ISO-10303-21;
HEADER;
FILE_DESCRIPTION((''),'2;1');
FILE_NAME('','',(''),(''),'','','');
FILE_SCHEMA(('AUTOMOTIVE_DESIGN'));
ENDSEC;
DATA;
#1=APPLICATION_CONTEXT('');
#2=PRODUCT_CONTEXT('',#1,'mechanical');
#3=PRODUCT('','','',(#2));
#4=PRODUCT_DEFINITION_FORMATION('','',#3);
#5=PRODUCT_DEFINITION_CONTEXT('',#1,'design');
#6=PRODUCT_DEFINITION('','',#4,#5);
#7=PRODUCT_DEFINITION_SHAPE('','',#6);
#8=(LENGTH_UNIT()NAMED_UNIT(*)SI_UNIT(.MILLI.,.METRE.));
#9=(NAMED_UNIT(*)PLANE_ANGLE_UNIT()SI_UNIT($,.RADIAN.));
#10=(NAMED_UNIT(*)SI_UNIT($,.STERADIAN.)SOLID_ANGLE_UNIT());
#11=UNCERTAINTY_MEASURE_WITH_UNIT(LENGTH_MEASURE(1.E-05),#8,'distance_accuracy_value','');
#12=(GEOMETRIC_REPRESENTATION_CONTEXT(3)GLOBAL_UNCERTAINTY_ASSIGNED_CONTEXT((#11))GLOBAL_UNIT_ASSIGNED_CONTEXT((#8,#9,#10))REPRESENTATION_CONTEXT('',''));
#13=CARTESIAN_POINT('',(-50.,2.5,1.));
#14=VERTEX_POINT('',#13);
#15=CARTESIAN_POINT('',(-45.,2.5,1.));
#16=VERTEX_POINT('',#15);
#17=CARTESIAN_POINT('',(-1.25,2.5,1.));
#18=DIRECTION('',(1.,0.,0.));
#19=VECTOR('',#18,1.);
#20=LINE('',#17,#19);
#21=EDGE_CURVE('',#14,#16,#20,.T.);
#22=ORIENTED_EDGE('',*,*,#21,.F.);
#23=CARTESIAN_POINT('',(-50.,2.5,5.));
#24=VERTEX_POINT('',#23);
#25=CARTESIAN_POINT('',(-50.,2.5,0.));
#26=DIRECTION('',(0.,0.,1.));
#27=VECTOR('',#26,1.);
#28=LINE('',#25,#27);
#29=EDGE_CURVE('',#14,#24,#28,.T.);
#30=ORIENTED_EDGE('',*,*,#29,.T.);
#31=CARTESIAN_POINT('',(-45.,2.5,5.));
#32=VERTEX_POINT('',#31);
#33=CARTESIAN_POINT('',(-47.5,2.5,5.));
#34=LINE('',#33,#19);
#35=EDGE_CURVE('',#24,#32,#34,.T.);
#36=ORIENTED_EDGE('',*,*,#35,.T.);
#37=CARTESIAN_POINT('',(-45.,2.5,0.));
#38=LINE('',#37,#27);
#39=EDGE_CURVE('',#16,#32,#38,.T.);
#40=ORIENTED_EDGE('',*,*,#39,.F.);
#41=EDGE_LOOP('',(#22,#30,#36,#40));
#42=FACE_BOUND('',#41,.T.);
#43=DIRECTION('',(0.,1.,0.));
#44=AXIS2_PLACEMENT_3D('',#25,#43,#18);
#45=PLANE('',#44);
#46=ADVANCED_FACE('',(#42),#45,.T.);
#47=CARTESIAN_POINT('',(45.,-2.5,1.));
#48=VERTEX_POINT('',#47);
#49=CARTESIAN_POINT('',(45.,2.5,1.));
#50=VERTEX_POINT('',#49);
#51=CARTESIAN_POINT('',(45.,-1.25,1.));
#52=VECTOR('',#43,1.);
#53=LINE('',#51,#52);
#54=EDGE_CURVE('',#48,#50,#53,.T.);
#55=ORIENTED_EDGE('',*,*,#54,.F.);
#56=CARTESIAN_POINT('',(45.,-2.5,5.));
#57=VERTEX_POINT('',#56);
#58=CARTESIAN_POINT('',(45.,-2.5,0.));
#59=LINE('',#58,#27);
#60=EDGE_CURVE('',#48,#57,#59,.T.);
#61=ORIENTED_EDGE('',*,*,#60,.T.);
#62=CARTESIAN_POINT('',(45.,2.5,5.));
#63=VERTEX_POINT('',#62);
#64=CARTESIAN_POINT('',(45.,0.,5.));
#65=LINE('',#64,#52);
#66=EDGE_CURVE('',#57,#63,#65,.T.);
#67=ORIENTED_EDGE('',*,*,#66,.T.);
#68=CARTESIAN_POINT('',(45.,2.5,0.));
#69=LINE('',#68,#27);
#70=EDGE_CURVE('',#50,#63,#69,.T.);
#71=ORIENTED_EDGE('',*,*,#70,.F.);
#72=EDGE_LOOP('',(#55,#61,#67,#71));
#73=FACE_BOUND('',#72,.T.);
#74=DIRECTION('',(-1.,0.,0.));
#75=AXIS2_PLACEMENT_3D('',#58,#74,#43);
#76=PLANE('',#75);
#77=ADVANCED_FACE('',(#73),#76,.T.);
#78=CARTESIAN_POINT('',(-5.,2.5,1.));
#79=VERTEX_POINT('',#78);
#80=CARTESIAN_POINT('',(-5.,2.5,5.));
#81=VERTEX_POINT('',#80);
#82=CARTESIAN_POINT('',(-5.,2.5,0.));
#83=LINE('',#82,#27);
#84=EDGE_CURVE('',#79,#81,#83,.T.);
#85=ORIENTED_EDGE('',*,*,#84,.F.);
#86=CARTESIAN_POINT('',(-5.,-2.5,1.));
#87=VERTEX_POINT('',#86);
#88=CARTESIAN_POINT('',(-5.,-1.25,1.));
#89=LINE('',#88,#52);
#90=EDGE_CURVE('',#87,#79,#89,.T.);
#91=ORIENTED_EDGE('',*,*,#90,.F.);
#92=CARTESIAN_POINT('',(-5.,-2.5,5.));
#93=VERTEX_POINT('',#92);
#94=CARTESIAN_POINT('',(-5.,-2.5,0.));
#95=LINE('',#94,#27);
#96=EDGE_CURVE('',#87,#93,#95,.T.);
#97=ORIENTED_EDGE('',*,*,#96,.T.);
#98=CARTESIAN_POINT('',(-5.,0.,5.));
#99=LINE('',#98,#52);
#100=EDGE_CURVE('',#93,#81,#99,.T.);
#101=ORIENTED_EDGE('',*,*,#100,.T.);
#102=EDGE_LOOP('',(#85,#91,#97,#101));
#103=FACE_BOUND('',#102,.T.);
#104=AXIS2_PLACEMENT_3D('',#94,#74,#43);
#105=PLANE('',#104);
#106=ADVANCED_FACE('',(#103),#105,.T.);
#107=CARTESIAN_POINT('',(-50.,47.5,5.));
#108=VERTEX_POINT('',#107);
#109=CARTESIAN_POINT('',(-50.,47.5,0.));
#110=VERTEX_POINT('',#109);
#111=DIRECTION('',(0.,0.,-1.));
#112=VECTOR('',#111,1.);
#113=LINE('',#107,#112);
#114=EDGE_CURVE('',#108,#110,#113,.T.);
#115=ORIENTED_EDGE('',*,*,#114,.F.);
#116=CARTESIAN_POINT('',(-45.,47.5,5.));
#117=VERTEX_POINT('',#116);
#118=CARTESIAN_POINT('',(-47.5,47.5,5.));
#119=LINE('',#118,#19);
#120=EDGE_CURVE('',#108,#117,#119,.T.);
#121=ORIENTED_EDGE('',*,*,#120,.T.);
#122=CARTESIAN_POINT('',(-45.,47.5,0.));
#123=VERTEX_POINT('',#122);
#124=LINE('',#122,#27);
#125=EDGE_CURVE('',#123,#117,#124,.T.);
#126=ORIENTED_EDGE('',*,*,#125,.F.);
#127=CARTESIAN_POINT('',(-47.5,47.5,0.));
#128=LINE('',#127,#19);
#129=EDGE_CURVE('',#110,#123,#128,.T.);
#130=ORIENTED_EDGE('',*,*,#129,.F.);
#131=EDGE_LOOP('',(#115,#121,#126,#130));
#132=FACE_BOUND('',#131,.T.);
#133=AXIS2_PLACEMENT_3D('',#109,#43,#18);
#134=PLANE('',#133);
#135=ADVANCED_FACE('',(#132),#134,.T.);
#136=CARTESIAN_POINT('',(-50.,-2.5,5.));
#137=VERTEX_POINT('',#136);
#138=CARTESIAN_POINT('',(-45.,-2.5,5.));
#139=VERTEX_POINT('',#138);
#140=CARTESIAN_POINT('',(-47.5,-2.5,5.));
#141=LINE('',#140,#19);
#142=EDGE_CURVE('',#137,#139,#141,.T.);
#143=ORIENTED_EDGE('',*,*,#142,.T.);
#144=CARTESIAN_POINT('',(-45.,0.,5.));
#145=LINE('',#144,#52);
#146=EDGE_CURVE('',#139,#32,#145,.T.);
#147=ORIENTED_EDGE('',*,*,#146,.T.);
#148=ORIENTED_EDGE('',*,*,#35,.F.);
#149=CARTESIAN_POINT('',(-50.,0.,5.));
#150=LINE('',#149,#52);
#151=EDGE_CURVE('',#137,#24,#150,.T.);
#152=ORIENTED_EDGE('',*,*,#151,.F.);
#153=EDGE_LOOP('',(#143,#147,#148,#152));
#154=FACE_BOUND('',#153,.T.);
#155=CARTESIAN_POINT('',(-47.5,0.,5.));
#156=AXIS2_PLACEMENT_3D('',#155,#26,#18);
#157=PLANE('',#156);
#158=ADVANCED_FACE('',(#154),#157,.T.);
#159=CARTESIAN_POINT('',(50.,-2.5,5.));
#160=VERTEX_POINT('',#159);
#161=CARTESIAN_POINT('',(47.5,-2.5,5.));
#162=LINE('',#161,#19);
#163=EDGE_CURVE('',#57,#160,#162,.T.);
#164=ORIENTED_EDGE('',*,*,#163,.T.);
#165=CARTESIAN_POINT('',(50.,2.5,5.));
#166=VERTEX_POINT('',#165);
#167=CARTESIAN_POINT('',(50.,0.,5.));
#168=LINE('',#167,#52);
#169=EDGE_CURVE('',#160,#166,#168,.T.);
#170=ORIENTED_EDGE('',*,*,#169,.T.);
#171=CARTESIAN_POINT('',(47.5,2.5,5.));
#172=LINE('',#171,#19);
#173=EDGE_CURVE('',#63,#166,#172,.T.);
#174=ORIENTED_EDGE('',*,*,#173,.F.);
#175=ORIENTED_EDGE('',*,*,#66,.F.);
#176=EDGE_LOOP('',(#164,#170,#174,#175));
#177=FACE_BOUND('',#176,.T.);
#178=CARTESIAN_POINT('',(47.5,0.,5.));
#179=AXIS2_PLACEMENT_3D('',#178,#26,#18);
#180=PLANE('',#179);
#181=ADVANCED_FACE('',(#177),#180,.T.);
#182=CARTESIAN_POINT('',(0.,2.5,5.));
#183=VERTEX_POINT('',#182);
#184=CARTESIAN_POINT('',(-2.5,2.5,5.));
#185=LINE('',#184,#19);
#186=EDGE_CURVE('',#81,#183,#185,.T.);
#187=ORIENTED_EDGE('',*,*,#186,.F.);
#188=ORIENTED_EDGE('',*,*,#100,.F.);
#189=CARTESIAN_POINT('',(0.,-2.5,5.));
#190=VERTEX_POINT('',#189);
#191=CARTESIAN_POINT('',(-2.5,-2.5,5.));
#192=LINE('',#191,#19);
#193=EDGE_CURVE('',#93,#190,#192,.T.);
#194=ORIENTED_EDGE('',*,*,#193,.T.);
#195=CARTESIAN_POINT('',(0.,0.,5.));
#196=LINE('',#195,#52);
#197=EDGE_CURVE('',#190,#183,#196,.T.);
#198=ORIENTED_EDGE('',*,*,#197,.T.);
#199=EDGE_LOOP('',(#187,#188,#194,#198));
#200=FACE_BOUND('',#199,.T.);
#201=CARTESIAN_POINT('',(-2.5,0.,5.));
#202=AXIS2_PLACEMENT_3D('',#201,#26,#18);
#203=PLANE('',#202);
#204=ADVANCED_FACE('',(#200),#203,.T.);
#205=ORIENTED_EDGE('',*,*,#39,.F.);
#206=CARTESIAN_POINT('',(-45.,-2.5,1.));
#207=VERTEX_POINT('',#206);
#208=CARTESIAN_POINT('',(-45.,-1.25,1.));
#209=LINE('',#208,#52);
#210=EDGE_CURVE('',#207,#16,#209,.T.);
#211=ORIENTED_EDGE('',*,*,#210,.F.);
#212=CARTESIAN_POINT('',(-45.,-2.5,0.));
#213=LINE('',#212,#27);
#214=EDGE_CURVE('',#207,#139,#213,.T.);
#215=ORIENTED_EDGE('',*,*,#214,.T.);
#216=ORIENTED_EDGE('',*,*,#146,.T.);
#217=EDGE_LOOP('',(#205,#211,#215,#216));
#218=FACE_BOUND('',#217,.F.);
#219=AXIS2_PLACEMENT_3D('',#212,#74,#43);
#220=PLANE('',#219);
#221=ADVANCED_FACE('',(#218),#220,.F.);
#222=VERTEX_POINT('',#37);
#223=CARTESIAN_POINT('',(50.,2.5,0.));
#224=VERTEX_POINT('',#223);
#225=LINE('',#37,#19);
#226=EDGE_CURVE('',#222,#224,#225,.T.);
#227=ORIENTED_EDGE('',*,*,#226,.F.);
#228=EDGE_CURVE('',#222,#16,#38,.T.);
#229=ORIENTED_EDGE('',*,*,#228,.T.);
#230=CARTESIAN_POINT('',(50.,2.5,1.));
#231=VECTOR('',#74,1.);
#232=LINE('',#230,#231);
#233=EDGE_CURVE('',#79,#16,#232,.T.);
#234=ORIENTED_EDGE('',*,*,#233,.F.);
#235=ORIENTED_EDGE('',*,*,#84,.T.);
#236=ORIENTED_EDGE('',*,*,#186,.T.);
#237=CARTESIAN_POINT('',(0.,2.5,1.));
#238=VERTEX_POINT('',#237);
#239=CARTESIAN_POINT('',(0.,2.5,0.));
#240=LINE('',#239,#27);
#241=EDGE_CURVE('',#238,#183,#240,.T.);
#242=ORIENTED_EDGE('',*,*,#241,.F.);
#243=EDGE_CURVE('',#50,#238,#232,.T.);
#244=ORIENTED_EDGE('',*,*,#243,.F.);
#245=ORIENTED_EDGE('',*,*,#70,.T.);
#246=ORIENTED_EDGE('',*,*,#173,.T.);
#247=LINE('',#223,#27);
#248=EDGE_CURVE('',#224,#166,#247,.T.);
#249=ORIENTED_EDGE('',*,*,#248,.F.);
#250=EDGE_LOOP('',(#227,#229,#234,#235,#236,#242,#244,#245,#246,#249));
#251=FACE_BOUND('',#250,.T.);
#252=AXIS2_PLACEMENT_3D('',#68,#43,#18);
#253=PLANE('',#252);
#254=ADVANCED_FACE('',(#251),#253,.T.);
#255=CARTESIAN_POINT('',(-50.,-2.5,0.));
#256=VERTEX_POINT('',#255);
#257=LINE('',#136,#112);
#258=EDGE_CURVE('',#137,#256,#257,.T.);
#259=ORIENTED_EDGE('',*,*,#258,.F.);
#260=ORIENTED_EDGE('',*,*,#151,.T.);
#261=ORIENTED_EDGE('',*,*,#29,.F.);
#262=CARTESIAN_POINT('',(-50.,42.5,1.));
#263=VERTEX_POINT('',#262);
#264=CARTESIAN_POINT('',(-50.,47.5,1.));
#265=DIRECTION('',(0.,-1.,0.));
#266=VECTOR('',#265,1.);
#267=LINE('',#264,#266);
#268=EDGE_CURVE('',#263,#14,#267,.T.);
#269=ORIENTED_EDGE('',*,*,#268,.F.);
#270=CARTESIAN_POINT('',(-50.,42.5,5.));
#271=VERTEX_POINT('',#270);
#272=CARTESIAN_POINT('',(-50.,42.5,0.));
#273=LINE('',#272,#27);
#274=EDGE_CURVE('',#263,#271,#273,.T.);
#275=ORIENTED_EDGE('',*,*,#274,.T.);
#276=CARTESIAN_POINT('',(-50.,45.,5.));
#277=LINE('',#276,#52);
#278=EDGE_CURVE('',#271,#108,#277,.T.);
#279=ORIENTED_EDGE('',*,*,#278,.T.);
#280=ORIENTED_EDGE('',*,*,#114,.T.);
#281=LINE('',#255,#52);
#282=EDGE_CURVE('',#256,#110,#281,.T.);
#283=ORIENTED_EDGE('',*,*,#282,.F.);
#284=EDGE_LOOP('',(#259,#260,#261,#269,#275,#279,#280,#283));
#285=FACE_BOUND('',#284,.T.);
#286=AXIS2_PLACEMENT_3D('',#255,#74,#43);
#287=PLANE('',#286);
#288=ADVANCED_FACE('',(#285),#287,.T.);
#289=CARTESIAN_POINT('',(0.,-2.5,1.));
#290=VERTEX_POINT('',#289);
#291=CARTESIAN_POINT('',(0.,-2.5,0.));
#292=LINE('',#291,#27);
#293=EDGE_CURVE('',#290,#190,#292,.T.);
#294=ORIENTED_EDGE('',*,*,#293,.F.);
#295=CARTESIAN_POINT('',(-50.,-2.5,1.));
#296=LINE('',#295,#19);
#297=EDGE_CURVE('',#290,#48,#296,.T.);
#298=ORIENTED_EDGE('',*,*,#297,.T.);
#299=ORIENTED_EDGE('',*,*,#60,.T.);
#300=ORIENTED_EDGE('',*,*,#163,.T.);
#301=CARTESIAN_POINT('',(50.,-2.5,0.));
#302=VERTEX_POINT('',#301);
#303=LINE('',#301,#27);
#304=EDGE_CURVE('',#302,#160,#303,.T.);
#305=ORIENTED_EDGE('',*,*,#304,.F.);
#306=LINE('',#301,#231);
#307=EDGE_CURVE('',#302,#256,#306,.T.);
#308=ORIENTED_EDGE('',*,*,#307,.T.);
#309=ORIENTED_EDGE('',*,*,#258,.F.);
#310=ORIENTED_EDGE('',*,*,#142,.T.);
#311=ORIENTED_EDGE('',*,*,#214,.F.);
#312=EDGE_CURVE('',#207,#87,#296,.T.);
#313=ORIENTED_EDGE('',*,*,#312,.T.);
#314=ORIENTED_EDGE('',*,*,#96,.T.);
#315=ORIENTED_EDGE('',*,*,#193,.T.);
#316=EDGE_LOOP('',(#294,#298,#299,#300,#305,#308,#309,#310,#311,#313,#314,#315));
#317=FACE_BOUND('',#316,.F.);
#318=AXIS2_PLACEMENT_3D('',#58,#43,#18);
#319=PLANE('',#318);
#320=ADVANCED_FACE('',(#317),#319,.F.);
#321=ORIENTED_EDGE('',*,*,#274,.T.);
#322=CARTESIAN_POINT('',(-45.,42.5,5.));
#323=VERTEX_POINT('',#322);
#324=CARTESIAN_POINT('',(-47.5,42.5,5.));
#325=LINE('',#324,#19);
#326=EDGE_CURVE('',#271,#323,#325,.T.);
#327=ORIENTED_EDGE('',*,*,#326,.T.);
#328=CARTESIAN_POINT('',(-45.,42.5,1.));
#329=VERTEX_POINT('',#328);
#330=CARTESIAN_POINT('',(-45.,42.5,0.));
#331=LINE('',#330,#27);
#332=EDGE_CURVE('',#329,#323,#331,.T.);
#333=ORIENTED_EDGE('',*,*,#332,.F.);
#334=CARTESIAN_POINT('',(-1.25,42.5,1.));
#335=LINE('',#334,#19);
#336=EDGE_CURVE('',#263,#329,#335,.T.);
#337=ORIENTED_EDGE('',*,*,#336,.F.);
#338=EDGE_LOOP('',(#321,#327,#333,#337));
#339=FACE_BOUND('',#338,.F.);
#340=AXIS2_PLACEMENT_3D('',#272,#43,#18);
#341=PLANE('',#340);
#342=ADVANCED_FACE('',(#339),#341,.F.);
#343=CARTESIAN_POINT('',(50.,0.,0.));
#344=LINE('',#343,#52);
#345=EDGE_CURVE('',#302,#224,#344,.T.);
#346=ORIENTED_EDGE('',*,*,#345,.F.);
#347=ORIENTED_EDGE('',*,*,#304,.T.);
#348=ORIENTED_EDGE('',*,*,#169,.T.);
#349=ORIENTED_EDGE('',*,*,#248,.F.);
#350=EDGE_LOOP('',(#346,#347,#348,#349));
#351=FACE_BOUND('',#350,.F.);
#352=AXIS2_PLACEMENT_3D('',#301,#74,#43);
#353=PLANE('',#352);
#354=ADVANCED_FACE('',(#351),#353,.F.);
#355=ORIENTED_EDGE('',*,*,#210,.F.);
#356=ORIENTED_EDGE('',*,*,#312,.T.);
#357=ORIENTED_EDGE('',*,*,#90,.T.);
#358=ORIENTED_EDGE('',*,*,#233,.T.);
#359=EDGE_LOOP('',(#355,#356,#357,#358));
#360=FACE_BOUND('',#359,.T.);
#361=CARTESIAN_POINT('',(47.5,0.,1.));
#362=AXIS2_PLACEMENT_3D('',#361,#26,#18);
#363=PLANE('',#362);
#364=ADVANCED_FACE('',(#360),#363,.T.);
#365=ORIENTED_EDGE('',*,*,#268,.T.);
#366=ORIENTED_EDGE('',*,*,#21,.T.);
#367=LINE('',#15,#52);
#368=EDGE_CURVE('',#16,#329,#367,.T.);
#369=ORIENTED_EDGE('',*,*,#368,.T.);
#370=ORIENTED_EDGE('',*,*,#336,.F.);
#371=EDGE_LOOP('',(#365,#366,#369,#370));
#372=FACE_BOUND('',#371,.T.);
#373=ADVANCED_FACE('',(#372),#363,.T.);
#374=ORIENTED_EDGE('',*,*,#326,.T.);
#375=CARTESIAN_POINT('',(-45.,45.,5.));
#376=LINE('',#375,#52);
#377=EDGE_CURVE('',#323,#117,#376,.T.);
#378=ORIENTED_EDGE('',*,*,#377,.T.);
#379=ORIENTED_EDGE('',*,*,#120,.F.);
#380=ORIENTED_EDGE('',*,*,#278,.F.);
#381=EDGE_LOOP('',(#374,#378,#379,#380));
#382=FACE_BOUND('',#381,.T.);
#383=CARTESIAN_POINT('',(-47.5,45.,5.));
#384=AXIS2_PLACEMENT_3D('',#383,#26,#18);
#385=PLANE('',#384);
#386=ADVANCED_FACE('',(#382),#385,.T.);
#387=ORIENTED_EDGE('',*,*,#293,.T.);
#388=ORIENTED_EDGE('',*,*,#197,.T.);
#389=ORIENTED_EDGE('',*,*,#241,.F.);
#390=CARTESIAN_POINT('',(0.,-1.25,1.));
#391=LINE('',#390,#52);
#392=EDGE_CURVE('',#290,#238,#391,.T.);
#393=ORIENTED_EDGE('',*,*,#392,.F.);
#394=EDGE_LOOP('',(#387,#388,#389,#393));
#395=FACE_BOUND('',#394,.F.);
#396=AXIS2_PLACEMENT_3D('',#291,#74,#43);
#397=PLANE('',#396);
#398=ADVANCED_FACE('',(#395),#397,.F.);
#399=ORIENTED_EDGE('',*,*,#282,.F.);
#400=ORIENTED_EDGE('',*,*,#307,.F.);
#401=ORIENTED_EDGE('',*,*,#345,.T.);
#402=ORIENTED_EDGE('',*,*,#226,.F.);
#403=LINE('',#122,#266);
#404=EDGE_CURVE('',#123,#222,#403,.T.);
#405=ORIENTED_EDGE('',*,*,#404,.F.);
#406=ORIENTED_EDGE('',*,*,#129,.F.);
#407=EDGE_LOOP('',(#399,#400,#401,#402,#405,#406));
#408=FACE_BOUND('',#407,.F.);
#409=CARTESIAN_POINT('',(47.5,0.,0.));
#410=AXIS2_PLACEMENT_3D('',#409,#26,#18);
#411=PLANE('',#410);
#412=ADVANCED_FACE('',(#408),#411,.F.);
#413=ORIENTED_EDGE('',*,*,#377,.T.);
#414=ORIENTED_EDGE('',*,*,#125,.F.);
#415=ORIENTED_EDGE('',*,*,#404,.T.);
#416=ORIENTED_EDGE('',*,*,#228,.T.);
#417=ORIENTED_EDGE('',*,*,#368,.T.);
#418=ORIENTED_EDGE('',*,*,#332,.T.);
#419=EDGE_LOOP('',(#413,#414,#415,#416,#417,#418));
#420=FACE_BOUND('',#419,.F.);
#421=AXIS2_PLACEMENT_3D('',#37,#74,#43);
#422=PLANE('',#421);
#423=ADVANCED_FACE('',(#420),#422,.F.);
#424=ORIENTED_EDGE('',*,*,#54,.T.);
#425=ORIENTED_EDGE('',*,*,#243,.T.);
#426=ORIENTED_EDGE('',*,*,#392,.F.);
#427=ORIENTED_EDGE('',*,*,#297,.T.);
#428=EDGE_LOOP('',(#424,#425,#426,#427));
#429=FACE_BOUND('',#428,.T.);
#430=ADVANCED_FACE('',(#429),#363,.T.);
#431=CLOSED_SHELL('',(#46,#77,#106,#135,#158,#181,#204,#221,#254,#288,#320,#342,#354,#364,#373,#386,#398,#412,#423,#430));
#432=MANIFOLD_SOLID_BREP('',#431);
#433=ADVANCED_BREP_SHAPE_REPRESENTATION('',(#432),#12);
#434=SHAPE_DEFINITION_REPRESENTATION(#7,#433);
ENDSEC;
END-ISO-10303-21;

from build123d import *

# Parameters (mm, degrees)
F0_W     = 5
F0_H     = 5
F1_DEPTH = 5
F0_W_2   = 45
F0_W_3   = 40
F0_H_2   = 40
F2_DEPTH = 1


# Not quite as in the source:
# - a feature of the source that left no trace in its solid (it failed there, or was rolled back) is left out


with BuildPart() as f1:
    # F0 (on Top) → F1 (new body)
    with BuildSketch(Plane.XY):
        with Locations((-47.5, 45)):
            Rectangle(F0_W, F0_H)
    extrude(amount=F1_DEPTH)



with BuildPart() as f1b:
    # F0 (on Top) → F1, piece 2 (new body)
    with BuildSketch(Plane.XY):
        with Locations((-47.5, 0)):
            Rectangle(F0_W, F0_H)
    extrude(amount=F1_DEPTH)


with BuildPart() as f1c:
    # F0 (on Top) → F1, piece 3 (new body)
    with BuildSketch(Plane.XY):
        with Locations((-2.5, 0)):
            Rectangle(F0_W, F0_H)
    extrude(amount=F1_DEPTH)


with BuildPart() as f1d:
    # F0 (on Top) → F1, piece 4 (new body)
    with BuildSketch(Plane.XY):
        with Locations((47.5, 0)):
            Rectangle(F0_W, F0_H)
    extrude(amount=F1_DEPTH)


with BuildPart() as f1_1:
    add(f1.part)

    add(f1b.part)  # F2 merges F1b

    add(f1c.part)  # F2 merges F1c

    add(f1d.part)  # F2 merges F1d
    # F0 (on Top) → F2 (join)
    with BuildSketch(Plane.XY):
        with Locations((47.5, 0)):
            Rectangle(F0_W, F0_H)
        with Locations((22.5, 0)):
            Rectangle(F0_W_2, F0_H)
        with Locations((-2.5, 0)):
            Rectangle(F0_W, F0_H)
        with Locations((-25, 0)):
            Rectangle(F0_W_3, F0_H)
        with Locations((-47.5, 0)):
            Rectangle(F0_W, F0_H)
        with Locations((-47.5, 22.5)):
            Rectangle(F0_W, F0_H_2)
        with Locations((-47.5, 45)):
            Rectangle(F0_W, F0_H)
    extrude(amount=F2_DEPTH)


solid = f1_1.part
